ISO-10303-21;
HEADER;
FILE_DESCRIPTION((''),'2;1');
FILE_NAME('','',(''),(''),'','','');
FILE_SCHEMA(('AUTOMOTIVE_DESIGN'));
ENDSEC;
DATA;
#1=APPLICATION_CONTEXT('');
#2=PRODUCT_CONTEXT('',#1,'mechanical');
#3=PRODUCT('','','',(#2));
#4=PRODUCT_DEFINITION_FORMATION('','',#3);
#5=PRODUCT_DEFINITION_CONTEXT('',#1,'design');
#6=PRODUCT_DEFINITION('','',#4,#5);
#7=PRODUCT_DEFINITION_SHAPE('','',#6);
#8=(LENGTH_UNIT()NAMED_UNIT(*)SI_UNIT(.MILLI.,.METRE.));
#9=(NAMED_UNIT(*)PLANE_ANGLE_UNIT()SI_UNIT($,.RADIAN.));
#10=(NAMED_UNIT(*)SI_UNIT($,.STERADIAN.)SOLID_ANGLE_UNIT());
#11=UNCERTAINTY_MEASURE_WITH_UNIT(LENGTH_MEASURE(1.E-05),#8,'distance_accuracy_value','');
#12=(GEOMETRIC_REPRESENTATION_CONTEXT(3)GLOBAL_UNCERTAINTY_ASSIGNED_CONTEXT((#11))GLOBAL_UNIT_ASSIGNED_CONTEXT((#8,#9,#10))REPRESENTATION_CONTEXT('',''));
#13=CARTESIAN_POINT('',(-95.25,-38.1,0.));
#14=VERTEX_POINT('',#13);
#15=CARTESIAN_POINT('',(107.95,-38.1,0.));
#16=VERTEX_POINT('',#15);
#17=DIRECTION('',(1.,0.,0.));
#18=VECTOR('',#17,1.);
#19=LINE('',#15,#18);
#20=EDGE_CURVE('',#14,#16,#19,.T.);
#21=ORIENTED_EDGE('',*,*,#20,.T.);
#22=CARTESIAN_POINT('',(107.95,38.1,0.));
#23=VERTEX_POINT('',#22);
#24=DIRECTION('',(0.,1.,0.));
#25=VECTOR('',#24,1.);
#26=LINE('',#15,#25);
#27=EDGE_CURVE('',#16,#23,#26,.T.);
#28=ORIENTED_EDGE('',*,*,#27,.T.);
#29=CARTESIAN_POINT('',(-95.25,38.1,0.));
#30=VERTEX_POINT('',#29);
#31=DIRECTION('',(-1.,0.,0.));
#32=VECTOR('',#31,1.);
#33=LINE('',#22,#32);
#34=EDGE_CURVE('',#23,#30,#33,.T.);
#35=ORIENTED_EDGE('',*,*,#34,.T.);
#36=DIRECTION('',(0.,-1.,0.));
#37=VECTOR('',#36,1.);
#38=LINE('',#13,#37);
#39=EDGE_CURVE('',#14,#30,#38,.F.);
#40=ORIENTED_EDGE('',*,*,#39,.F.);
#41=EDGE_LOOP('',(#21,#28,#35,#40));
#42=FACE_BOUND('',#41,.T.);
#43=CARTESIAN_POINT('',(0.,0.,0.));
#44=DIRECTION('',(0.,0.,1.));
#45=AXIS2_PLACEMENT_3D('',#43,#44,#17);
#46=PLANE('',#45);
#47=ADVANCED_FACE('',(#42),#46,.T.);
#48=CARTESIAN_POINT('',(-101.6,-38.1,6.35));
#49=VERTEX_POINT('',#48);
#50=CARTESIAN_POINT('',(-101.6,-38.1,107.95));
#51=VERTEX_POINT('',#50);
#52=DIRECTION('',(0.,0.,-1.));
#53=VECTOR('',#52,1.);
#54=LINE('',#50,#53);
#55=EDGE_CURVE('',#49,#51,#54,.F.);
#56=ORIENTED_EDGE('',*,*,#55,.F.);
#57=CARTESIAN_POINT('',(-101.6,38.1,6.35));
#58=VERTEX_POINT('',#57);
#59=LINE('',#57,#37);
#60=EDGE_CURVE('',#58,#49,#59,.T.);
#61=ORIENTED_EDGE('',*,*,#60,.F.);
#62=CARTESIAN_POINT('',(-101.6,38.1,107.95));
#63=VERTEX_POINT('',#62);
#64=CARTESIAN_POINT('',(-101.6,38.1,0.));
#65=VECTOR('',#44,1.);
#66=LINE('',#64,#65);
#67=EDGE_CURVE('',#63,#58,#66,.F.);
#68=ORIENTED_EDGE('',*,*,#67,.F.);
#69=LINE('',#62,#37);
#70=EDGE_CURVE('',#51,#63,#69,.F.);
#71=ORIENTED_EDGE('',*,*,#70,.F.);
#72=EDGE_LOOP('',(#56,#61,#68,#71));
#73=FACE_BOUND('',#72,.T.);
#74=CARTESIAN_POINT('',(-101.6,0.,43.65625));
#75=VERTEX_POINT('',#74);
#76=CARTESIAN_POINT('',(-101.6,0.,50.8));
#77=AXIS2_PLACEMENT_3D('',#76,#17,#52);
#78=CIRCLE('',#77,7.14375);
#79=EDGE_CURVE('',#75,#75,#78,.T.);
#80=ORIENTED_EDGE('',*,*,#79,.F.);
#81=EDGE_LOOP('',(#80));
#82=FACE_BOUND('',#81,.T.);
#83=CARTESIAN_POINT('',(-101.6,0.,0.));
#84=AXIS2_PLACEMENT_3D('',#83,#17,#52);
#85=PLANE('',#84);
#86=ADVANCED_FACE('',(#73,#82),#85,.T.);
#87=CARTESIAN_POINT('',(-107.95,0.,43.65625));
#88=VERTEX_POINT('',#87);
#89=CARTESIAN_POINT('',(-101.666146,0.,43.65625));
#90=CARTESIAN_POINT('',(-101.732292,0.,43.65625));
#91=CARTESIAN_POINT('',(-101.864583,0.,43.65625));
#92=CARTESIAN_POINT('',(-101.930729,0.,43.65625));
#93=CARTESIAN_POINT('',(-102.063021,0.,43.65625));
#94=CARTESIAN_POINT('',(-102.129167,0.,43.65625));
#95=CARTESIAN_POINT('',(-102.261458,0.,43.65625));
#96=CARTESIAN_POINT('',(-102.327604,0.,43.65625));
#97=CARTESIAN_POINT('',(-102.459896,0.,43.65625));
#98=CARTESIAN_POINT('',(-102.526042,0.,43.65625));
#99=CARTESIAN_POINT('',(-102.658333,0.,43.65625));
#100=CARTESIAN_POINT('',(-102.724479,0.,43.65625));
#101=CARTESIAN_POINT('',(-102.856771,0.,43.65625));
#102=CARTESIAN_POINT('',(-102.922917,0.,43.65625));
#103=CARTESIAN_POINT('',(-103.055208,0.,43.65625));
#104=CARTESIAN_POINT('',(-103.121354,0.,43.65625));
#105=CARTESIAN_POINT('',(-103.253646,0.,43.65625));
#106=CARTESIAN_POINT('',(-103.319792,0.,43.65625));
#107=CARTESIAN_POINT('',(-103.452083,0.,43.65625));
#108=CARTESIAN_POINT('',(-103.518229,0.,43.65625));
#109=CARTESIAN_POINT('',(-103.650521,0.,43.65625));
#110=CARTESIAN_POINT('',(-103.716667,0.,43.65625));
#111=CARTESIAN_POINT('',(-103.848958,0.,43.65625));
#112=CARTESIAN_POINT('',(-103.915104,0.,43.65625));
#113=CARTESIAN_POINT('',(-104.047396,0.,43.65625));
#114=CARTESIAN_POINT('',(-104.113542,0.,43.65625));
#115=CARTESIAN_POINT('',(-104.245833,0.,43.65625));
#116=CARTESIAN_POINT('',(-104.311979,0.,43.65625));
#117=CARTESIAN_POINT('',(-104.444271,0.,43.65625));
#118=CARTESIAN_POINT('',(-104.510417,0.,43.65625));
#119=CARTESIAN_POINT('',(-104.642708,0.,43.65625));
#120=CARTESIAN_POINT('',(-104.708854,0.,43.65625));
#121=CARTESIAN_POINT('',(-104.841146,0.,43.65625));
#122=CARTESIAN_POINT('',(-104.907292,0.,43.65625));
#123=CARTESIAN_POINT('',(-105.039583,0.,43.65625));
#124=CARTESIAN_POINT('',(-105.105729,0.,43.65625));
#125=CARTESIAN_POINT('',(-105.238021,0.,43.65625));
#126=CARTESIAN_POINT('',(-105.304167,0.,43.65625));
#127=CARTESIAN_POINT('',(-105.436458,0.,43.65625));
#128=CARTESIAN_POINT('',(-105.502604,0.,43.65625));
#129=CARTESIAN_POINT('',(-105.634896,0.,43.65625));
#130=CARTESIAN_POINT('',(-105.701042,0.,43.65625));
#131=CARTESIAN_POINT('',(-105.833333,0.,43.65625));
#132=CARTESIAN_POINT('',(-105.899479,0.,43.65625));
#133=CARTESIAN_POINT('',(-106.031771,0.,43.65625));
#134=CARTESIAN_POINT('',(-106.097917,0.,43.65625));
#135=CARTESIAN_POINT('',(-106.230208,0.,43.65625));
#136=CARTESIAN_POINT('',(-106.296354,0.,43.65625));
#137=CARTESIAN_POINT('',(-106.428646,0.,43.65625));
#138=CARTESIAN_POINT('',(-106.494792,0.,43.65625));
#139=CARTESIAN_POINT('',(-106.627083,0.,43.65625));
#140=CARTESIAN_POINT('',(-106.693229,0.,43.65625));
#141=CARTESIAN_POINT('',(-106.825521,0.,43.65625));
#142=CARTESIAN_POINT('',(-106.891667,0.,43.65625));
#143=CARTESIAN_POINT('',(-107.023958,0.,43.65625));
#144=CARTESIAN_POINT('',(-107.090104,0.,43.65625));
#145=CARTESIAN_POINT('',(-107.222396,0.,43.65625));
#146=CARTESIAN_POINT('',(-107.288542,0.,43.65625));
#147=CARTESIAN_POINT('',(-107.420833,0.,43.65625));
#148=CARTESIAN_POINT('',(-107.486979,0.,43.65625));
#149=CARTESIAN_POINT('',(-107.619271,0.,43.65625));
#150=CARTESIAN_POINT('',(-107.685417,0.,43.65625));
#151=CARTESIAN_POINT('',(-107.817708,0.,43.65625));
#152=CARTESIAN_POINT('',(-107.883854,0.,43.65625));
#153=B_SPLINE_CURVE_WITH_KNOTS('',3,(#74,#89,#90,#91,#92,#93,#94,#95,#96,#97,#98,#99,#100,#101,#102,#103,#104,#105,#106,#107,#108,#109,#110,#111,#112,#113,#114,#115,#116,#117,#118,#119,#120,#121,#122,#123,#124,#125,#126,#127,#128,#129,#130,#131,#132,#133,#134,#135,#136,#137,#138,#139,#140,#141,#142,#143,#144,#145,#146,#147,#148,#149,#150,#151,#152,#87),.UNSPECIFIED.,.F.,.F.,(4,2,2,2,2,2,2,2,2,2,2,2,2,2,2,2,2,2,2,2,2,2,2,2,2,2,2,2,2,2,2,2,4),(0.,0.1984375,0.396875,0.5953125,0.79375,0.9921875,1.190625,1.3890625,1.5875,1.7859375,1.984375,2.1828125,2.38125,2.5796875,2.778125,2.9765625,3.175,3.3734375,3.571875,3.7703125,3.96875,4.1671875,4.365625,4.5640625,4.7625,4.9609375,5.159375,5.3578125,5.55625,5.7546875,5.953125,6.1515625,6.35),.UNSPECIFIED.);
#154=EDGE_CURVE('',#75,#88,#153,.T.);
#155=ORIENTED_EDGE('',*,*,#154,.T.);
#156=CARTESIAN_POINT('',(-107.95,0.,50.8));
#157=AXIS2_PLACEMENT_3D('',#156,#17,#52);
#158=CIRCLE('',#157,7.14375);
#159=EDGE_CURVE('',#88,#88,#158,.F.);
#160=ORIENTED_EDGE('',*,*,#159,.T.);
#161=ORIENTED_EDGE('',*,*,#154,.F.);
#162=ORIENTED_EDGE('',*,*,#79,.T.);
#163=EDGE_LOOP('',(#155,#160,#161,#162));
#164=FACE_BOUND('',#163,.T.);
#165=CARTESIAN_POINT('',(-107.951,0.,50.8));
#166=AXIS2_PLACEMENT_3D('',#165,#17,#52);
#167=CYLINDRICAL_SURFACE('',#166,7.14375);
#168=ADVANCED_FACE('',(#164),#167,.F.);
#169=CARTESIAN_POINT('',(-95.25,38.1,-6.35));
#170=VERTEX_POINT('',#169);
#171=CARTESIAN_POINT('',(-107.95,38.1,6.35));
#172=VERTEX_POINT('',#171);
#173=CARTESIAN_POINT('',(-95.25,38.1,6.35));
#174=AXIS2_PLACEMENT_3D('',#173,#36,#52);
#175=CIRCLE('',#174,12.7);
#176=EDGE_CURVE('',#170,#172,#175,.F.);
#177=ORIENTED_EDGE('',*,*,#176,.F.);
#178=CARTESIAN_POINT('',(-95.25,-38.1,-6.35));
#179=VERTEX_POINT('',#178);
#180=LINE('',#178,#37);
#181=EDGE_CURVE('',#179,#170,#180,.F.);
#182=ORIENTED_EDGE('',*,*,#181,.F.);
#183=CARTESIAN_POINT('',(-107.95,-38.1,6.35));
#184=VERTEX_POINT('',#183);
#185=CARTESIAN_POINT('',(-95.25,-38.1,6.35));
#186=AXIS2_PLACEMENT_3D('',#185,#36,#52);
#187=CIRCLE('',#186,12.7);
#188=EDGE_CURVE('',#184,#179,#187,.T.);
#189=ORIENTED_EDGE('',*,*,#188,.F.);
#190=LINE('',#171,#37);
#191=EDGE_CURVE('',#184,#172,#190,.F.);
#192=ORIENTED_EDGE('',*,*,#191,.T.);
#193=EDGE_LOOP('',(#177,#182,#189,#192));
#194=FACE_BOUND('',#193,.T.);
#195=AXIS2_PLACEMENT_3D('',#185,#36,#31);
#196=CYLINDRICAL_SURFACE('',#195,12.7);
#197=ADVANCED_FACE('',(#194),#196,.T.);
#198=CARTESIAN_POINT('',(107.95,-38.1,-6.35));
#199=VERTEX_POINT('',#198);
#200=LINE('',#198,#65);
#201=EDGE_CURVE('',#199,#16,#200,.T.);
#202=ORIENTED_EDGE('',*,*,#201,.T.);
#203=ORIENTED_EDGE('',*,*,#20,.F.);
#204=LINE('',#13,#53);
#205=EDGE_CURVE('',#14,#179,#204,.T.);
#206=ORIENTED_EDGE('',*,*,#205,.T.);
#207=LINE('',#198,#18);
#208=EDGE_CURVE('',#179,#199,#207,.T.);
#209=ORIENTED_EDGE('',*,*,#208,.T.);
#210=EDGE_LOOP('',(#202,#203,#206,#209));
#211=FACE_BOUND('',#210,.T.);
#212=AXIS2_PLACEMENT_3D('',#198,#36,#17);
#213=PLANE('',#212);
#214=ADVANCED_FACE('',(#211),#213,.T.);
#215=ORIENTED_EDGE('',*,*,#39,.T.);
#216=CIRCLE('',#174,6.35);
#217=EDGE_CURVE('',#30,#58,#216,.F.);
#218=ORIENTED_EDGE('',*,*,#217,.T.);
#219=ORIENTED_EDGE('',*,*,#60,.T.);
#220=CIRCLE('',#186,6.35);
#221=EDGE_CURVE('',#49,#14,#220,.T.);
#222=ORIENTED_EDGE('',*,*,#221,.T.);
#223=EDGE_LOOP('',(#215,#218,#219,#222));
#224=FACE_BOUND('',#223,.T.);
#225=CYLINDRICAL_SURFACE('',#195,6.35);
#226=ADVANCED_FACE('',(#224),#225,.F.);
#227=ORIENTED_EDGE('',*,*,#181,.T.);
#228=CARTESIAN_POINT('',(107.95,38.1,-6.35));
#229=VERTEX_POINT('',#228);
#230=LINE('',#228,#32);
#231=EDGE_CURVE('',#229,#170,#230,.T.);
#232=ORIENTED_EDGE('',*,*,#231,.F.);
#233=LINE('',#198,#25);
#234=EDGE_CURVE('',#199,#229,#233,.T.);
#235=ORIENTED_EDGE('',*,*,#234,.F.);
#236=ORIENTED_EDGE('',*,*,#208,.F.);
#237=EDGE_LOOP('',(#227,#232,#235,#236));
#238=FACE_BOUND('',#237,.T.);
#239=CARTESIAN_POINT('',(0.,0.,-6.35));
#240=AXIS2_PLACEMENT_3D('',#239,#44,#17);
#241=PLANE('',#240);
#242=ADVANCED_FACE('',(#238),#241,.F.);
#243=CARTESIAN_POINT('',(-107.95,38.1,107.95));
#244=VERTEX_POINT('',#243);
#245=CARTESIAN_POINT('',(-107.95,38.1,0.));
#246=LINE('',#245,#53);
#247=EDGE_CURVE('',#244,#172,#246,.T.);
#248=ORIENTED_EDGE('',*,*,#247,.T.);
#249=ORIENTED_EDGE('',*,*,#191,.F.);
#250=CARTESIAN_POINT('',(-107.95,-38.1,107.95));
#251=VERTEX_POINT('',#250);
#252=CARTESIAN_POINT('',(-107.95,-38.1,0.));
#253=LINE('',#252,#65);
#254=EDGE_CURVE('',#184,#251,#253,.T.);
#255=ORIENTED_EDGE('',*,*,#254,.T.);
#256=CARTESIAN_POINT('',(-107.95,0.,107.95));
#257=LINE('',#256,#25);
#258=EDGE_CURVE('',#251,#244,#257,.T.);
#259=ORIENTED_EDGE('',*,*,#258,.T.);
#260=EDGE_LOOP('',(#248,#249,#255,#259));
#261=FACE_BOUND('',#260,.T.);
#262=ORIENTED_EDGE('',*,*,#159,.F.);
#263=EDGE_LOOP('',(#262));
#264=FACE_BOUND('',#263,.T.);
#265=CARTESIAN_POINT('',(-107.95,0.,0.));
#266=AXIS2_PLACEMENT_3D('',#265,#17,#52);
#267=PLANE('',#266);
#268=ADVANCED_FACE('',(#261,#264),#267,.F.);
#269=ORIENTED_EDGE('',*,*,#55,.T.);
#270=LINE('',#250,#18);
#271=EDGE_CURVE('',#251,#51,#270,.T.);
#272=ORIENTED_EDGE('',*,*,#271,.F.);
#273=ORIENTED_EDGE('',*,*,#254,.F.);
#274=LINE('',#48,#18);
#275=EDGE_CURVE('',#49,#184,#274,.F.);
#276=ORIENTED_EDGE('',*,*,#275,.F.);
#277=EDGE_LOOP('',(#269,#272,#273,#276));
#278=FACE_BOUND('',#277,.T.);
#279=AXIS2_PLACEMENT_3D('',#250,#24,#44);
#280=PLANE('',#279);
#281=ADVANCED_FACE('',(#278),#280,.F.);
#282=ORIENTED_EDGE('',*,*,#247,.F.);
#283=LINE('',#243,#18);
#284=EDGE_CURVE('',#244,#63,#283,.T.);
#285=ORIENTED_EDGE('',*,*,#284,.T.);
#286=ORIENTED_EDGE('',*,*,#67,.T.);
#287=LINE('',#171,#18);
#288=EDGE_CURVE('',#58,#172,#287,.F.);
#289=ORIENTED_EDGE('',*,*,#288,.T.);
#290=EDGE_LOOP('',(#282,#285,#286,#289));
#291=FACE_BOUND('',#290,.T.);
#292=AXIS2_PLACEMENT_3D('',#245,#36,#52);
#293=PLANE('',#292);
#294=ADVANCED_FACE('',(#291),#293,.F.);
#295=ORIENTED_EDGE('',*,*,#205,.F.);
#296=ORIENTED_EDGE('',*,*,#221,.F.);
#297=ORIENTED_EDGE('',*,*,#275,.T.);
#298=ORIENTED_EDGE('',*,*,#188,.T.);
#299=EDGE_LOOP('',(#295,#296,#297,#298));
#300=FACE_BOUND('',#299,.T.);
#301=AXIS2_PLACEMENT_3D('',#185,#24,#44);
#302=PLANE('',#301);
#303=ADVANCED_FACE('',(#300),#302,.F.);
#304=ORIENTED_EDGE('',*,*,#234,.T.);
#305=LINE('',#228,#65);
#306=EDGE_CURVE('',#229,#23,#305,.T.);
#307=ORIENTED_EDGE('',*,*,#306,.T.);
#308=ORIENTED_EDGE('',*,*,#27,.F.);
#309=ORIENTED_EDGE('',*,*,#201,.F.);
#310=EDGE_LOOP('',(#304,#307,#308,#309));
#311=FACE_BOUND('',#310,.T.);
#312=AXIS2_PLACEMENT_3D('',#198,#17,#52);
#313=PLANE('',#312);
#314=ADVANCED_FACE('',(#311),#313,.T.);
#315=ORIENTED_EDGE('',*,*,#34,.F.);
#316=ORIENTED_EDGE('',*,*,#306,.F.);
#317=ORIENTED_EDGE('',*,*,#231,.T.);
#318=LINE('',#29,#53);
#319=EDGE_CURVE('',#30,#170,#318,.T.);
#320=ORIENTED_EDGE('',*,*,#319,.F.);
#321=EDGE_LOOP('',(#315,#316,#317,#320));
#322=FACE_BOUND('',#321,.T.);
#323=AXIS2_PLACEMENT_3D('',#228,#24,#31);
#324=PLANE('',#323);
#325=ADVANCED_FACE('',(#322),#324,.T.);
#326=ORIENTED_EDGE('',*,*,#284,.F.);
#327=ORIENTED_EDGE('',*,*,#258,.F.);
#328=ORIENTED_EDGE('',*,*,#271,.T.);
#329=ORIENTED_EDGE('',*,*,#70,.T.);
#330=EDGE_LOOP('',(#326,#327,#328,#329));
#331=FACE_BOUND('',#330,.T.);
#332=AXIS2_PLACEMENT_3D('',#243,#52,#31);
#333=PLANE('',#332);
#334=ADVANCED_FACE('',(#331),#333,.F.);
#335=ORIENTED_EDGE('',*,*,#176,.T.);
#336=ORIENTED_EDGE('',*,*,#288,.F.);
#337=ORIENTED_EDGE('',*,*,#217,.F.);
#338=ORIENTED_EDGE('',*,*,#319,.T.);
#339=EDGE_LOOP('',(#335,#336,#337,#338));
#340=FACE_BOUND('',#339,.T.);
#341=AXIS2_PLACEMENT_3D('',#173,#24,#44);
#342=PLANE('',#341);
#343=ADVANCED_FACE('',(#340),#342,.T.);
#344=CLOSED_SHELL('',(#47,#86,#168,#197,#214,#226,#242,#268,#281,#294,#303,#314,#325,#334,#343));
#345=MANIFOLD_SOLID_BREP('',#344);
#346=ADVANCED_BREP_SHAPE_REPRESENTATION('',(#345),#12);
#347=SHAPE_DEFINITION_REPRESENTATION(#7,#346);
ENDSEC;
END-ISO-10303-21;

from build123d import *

# Parameters (mm, degrees)
SKETCH19_W                   = 215.9
SKETCH19_H                   = 76.2
BASE_FLANGE2_DEPTH           = 6.35
EDGE_FLANGE4_STRIP_W         = 38.1
EDGE_FLANGE4_STRIP_H         = 6.35
EDGE_FLANGE4_STRIP_CUT_DEPTH = 76.2
EDGE_FLANGE4_DEPTH           = 76.2
CUT_EXTRUDE1_REACH           = 240.78
SKETCH27_R                   = 7.14375


# Sheet-metal steps are written as plain solids
with BuildPart() as part:
    # Sketch19 → Base-Flange2 (new body)
    with BuildSketch(Plane.XY):
        Rectangle(SKETCH19_W, SKETCH19_H)
    extrude(amount=-BASE_FLANGE2_DEPTH)

    # Edge-Flange4 strip (across the edge) → Edge-Flange4 strip cut (cut)
    with BuildSketch(Plane(origin=(-107.95, 38.1, 0), x_dir=(1, 0, 0), z_dir=(0, -1, 0))):
        with Locations((-6.35, -3.175)):
            Rectangle(EDGE_FLANGE4_STRIP_W, EDGE_FLANGE4_STRIP_H)
    extrude(amount=EDGE_FLANGE4_STRIP_CUT_DEPTH, mode=Mode.SUBTRACT)

    # Edge-Flange4 section (across the edge) → Edge-Flange4 (add)
    with BuildSketch(Plane(origin=(-107.95, 38.1, 0), x_dir=(1, 0, 0), z_dir=(0, -1, 0))):
        with BuildLine():
            Line((0, 6.35), (0, 107.95))
            Line((0, 107.95), (6.35, 107.95))
            Line((6.35, 107.95), (6.35, 6.35))
            ThreePointArc((6.35, 6.35), (8.209871939, 1.859871939), (12.7, 0))
            Line((12.7, 0), (12.7, -6.35))
            ThreePointArc((12.7, -6.35), (3.719743879, -2.630256121), (0, 6.35))
        make_face()
    extrude(amount=EDGE_FLANGE4_DEPTH)

    # Sketch27 → Cut-Extrude1 (cut, up to next)
    with BuildSketch(Plane(origin=(-101.6, 0, 0), x_dir=(0, 0, -1), z_dir=(1, 0, 0)), mode=Mode.PRIVATE) as cut_extrude1_sk1:
        with Locations((-50.8, 0)):
            Circle(SKETCH27_R)
    cut_extrude1_tool1 = extrude(cut_extrude1_sk1.sketch, amount=-CUT_EXTRUDE1_REACH, mode=Mode.PRIVATE) & part.part
    add(cut_extrude1_tool1.solids().sort_by_distance((-101.6, 0, 50.8))[0], mode=Mode.SUBTRACT)


solid = part.part
